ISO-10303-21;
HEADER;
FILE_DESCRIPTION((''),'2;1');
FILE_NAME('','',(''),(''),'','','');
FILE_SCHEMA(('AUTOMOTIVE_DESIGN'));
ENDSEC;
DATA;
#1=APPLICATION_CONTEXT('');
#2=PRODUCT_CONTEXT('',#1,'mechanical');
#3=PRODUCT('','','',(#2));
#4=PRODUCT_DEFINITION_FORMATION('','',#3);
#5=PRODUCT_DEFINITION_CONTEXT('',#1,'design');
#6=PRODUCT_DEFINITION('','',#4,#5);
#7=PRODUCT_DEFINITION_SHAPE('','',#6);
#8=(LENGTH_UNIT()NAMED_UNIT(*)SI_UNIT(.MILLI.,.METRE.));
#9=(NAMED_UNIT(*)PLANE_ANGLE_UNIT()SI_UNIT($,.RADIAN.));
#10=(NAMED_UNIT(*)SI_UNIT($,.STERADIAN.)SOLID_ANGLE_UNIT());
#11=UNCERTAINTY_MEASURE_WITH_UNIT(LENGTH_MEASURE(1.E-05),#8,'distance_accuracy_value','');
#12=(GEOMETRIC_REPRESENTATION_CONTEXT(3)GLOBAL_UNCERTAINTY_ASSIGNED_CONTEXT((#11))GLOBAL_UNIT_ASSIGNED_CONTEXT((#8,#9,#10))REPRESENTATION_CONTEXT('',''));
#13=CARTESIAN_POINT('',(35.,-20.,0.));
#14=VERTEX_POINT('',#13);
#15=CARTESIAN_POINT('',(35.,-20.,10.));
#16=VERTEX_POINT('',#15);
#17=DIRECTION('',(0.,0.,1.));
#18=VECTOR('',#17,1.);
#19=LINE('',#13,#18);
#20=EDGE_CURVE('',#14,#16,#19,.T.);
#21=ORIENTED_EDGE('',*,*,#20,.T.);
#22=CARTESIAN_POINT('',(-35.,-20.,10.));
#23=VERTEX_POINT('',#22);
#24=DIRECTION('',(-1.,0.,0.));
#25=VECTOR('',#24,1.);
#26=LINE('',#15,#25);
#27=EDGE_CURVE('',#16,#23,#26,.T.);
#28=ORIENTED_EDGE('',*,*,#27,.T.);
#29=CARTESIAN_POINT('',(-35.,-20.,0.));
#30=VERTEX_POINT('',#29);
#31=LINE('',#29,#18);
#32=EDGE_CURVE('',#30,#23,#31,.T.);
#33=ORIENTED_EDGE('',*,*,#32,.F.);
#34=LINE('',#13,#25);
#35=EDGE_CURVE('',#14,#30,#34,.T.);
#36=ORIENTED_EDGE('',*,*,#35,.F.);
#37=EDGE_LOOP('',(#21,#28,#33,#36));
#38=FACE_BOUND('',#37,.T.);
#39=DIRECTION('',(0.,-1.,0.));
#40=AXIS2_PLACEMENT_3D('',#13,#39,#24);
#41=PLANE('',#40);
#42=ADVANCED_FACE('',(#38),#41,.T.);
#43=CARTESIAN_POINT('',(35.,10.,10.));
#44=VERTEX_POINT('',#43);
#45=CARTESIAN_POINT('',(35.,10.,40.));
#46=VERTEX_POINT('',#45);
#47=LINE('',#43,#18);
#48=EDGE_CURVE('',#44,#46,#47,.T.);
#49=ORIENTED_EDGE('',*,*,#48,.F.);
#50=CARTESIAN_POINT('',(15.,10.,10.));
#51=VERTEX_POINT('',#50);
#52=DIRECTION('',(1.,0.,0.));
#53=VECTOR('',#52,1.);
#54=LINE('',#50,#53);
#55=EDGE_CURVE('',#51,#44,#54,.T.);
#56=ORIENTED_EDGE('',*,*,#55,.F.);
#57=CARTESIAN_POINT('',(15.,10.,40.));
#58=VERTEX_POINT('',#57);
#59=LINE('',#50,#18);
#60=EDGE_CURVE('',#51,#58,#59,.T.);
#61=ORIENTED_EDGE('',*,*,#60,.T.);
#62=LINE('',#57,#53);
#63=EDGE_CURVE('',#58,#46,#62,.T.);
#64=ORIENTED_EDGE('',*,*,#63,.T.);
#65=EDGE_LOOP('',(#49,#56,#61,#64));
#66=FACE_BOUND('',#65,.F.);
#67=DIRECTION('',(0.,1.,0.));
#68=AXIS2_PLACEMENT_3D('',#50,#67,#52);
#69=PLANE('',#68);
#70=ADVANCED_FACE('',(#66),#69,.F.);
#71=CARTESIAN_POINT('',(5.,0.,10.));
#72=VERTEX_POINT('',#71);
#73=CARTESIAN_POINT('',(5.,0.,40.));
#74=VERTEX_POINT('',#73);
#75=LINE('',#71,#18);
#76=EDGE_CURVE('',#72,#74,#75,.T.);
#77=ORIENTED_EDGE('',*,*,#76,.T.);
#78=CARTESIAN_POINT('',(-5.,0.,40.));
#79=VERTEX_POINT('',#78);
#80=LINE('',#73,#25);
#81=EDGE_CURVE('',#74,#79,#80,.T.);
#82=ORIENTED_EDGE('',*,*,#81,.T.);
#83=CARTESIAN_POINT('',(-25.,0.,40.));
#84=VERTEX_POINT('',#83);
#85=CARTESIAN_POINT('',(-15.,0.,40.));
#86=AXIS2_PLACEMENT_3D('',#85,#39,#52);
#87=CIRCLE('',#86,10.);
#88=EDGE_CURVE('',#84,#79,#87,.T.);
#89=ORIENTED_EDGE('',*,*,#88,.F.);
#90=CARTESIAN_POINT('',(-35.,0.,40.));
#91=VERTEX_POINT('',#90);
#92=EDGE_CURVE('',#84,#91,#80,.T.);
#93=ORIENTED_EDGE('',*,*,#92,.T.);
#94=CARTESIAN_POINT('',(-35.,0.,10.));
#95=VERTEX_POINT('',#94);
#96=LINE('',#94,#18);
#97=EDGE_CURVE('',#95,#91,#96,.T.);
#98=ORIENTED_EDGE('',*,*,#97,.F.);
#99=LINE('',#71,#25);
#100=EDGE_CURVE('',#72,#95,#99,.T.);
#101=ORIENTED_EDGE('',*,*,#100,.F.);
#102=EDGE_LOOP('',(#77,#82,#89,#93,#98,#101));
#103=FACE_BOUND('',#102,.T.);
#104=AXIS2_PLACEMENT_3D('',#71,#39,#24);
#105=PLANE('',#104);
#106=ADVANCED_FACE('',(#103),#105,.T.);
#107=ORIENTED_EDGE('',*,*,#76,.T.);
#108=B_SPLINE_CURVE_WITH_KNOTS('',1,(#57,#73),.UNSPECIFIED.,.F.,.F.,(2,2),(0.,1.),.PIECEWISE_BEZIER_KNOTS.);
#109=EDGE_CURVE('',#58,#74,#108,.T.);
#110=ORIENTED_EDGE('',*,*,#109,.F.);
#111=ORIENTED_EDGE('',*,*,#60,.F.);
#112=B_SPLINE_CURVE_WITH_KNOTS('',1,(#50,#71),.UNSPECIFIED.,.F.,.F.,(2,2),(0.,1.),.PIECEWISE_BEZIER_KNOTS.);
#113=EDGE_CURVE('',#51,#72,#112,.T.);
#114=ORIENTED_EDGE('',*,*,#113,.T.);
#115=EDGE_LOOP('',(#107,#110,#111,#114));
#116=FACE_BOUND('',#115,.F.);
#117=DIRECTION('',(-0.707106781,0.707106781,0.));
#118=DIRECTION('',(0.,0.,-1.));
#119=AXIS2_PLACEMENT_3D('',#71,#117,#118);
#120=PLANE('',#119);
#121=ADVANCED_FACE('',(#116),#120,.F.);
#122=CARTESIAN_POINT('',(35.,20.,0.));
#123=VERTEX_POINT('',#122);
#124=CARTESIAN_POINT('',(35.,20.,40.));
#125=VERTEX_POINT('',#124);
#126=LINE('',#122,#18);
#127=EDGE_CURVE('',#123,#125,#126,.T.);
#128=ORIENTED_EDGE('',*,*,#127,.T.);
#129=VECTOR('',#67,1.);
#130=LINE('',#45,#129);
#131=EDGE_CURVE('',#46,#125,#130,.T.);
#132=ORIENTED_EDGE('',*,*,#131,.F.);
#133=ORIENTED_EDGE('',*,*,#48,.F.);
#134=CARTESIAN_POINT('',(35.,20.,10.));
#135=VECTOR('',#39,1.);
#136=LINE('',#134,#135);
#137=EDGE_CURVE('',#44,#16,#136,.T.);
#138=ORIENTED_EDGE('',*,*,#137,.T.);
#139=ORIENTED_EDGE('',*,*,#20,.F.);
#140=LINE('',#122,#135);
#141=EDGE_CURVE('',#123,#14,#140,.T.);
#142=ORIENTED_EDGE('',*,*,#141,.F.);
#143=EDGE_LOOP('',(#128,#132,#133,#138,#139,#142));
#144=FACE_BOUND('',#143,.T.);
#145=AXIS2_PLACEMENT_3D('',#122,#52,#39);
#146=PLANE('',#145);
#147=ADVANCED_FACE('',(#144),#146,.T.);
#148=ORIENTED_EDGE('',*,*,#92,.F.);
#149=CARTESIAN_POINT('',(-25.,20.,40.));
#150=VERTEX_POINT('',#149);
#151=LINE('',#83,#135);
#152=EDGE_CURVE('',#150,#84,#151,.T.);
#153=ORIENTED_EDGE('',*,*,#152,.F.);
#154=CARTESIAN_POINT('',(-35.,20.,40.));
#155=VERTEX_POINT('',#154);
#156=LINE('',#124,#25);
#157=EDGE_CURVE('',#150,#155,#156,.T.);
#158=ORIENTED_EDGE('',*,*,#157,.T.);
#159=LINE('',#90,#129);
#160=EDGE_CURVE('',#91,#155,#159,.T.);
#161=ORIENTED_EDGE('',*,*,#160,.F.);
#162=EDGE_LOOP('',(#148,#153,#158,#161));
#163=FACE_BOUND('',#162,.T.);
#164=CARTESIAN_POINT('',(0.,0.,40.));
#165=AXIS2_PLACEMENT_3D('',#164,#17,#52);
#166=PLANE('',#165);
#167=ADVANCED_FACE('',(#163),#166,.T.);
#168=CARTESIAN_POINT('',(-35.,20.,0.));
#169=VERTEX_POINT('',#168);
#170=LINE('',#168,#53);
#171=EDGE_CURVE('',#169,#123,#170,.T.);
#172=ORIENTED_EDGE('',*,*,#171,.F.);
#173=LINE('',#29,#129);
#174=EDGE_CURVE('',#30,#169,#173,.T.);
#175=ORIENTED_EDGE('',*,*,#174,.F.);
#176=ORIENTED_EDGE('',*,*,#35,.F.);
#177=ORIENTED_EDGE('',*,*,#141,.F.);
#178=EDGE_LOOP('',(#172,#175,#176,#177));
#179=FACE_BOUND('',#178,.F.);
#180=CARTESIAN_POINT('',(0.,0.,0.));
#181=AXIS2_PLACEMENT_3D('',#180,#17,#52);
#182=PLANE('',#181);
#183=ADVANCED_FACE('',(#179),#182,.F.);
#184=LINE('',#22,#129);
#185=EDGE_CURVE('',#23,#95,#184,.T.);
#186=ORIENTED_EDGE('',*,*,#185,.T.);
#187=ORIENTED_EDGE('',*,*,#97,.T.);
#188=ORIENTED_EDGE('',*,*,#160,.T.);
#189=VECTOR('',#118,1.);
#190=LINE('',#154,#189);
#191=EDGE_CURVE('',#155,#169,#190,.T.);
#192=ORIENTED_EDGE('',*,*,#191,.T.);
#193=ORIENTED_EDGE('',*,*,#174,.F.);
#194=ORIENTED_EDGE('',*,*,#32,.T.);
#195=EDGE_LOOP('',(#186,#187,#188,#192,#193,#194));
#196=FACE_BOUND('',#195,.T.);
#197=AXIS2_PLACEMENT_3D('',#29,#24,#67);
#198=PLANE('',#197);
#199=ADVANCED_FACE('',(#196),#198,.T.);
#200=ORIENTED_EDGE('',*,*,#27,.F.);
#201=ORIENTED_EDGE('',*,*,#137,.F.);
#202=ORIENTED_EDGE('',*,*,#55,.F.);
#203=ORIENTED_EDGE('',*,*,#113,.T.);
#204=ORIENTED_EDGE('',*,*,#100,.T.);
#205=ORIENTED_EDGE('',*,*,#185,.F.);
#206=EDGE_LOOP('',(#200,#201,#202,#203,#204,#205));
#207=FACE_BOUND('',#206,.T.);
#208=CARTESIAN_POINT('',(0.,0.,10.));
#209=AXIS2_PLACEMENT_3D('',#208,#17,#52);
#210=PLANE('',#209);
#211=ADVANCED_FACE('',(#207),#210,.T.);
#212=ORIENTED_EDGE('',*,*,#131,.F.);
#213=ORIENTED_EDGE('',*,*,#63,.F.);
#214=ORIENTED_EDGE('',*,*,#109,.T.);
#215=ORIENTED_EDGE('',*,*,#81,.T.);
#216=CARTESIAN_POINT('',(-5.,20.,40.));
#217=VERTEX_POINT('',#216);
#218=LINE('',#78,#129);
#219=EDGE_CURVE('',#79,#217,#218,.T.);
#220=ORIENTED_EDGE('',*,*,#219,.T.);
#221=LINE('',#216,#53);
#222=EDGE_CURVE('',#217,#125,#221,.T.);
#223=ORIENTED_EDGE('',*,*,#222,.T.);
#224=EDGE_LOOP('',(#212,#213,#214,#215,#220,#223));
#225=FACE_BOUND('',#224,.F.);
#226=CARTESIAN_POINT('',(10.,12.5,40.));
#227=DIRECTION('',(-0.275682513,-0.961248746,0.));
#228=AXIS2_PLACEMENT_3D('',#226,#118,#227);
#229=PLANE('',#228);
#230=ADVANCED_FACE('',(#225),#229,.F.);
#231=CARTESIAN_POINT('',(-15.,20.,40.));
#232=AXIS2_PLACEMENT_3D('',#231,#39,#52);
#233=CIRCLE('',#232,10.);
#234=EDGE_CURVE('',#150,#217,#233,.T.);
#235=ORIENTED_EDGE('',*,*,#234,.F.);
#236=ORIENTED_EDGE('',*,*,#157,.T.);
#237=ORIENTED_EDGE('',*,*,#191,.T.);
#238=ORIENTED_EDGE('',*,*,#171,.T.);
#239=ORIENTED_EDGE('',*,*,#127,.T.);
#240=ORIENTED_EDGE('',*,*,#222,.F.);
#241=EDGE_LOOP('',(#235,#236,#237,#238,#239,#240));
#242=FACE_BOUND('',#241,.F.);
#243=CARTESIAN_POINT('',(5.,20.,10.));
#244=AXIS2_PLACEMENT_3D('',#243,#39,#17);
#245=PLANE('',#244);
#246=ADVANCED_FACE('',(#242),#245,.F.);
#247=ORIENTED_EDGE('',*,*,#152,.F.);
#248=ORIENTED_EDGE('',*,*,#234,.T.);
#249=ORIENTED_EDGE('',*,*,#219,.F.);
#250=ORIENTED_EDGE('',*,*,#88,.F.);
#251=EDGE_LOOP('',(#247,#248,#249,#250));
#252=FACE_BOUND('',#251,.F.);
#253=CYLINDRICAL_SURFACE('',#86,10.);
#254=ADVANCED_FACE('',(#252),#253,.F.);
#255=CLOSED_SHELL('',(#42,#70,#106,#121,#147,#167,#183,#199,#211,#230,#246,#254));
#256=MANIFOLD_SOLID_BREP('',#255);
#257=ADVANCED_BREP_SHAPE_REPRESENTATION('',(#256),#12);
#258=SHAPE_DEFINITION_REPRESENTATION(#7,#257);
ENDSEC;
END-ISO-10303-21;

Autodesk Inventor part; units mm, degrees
ref_plane "YZ Plane" through (0, 0, 0) normal (1, 0, 0) x (0, 1, 0)
ref_plane "XZ Plane" through (0, 0, 0) normal (0, 1, 0) x (-1, 0, 0)
ref_plane "XY Plane" through (0, 0, 0) normal (0, 0, 1) x (1, 0, 0)
sketch "草圖1" plane through (0, 0, 0) normal (0, 0, 1) x (1, 0, 0)
  line L0 (35, -20) -> (-35, -20)
  line L1 (-35, -20) -> (-35, 20)
  line L2 (-35, 20) -> (35, 20)
  line L3 (35, 20) -> (35, -20)
  line L4 (35, -20) -> (-35, 20) construction
  line L5 (-35, -20) -> (35, 20) construction
  point P0 (0, 0)
  dimension "d0" = 70
  dimension "d1" = 40
extrude "擠出1" add sketch "草圖1" along normal blind 10
sketch "草圖2" plane through (0, 0, 10) normal (0, 0, 1) x (1, 0, 0)
  line L0 (35, 20) -> (-35, 20) projected
  line L1 (-35, 20) -> (5, 20)
  line L2 (5, 20) -> (5, 0)
  line L3 (5, 0) -> (-35, 0)
  line L4 (-35, 0) -> (-35, 20)
  line L5 (35, 20) -> (15, 20)
  line L6 (15, 20) -> (15, 10)
  line L7 (15, 10) -> (35, 10)
  line L8 (35, 10) -> (35, 20)
  point P0 (0, 0)
  point P1 (5, 20)
  dimension "d4" = 20
  dimension "d5" = 10
  dimension "d6" = 40
  dimension "d7" = 20
extrude "擠出2" add sketch "草圖2" along normal blind 30
sketch "草圖3" plane through (-35, 0, 10) normal (0, -1, 0) x (1, 0, 0)
  circle A0 centre (20, 30) radius 10
  line L0 (0, 0) -> (0, 30) projected
  line L1 (0, 0) -> (70, 0) projected
  point P0 (35, -10)
  dimension "d14" = 20
  dimension "d15" = 20
  dimension "d16" = 30
extrude "擠出3" cut sketch "草圖3" against normal blind 30
sketch "草圖4" plane through (5, 0, 10) normal (1, 0, 0) x (0, 0, -1)
  line L0 (-30, 20) -> (-30, 0) projected
  line L1 (-30, 0) -> (-0.078, 0)
  line L2 (-0.078, 0) -> (-0.078, 20)
  line L3 (-0.078, 20) -> (-30, 20)
  line L4 (-30, 20) -> (-30, 0)
  point P0 (10, 0)
loft "斷面混成2" add section 1 edges at (15, 15, 10) (15, 10, 25) (15, 15, 40) (15, 20, 25) section 2 edges at (5, 10, 10) (5, 20, 25) (5, 10, 40) (5, 0, 25)
properties part number "件28"
